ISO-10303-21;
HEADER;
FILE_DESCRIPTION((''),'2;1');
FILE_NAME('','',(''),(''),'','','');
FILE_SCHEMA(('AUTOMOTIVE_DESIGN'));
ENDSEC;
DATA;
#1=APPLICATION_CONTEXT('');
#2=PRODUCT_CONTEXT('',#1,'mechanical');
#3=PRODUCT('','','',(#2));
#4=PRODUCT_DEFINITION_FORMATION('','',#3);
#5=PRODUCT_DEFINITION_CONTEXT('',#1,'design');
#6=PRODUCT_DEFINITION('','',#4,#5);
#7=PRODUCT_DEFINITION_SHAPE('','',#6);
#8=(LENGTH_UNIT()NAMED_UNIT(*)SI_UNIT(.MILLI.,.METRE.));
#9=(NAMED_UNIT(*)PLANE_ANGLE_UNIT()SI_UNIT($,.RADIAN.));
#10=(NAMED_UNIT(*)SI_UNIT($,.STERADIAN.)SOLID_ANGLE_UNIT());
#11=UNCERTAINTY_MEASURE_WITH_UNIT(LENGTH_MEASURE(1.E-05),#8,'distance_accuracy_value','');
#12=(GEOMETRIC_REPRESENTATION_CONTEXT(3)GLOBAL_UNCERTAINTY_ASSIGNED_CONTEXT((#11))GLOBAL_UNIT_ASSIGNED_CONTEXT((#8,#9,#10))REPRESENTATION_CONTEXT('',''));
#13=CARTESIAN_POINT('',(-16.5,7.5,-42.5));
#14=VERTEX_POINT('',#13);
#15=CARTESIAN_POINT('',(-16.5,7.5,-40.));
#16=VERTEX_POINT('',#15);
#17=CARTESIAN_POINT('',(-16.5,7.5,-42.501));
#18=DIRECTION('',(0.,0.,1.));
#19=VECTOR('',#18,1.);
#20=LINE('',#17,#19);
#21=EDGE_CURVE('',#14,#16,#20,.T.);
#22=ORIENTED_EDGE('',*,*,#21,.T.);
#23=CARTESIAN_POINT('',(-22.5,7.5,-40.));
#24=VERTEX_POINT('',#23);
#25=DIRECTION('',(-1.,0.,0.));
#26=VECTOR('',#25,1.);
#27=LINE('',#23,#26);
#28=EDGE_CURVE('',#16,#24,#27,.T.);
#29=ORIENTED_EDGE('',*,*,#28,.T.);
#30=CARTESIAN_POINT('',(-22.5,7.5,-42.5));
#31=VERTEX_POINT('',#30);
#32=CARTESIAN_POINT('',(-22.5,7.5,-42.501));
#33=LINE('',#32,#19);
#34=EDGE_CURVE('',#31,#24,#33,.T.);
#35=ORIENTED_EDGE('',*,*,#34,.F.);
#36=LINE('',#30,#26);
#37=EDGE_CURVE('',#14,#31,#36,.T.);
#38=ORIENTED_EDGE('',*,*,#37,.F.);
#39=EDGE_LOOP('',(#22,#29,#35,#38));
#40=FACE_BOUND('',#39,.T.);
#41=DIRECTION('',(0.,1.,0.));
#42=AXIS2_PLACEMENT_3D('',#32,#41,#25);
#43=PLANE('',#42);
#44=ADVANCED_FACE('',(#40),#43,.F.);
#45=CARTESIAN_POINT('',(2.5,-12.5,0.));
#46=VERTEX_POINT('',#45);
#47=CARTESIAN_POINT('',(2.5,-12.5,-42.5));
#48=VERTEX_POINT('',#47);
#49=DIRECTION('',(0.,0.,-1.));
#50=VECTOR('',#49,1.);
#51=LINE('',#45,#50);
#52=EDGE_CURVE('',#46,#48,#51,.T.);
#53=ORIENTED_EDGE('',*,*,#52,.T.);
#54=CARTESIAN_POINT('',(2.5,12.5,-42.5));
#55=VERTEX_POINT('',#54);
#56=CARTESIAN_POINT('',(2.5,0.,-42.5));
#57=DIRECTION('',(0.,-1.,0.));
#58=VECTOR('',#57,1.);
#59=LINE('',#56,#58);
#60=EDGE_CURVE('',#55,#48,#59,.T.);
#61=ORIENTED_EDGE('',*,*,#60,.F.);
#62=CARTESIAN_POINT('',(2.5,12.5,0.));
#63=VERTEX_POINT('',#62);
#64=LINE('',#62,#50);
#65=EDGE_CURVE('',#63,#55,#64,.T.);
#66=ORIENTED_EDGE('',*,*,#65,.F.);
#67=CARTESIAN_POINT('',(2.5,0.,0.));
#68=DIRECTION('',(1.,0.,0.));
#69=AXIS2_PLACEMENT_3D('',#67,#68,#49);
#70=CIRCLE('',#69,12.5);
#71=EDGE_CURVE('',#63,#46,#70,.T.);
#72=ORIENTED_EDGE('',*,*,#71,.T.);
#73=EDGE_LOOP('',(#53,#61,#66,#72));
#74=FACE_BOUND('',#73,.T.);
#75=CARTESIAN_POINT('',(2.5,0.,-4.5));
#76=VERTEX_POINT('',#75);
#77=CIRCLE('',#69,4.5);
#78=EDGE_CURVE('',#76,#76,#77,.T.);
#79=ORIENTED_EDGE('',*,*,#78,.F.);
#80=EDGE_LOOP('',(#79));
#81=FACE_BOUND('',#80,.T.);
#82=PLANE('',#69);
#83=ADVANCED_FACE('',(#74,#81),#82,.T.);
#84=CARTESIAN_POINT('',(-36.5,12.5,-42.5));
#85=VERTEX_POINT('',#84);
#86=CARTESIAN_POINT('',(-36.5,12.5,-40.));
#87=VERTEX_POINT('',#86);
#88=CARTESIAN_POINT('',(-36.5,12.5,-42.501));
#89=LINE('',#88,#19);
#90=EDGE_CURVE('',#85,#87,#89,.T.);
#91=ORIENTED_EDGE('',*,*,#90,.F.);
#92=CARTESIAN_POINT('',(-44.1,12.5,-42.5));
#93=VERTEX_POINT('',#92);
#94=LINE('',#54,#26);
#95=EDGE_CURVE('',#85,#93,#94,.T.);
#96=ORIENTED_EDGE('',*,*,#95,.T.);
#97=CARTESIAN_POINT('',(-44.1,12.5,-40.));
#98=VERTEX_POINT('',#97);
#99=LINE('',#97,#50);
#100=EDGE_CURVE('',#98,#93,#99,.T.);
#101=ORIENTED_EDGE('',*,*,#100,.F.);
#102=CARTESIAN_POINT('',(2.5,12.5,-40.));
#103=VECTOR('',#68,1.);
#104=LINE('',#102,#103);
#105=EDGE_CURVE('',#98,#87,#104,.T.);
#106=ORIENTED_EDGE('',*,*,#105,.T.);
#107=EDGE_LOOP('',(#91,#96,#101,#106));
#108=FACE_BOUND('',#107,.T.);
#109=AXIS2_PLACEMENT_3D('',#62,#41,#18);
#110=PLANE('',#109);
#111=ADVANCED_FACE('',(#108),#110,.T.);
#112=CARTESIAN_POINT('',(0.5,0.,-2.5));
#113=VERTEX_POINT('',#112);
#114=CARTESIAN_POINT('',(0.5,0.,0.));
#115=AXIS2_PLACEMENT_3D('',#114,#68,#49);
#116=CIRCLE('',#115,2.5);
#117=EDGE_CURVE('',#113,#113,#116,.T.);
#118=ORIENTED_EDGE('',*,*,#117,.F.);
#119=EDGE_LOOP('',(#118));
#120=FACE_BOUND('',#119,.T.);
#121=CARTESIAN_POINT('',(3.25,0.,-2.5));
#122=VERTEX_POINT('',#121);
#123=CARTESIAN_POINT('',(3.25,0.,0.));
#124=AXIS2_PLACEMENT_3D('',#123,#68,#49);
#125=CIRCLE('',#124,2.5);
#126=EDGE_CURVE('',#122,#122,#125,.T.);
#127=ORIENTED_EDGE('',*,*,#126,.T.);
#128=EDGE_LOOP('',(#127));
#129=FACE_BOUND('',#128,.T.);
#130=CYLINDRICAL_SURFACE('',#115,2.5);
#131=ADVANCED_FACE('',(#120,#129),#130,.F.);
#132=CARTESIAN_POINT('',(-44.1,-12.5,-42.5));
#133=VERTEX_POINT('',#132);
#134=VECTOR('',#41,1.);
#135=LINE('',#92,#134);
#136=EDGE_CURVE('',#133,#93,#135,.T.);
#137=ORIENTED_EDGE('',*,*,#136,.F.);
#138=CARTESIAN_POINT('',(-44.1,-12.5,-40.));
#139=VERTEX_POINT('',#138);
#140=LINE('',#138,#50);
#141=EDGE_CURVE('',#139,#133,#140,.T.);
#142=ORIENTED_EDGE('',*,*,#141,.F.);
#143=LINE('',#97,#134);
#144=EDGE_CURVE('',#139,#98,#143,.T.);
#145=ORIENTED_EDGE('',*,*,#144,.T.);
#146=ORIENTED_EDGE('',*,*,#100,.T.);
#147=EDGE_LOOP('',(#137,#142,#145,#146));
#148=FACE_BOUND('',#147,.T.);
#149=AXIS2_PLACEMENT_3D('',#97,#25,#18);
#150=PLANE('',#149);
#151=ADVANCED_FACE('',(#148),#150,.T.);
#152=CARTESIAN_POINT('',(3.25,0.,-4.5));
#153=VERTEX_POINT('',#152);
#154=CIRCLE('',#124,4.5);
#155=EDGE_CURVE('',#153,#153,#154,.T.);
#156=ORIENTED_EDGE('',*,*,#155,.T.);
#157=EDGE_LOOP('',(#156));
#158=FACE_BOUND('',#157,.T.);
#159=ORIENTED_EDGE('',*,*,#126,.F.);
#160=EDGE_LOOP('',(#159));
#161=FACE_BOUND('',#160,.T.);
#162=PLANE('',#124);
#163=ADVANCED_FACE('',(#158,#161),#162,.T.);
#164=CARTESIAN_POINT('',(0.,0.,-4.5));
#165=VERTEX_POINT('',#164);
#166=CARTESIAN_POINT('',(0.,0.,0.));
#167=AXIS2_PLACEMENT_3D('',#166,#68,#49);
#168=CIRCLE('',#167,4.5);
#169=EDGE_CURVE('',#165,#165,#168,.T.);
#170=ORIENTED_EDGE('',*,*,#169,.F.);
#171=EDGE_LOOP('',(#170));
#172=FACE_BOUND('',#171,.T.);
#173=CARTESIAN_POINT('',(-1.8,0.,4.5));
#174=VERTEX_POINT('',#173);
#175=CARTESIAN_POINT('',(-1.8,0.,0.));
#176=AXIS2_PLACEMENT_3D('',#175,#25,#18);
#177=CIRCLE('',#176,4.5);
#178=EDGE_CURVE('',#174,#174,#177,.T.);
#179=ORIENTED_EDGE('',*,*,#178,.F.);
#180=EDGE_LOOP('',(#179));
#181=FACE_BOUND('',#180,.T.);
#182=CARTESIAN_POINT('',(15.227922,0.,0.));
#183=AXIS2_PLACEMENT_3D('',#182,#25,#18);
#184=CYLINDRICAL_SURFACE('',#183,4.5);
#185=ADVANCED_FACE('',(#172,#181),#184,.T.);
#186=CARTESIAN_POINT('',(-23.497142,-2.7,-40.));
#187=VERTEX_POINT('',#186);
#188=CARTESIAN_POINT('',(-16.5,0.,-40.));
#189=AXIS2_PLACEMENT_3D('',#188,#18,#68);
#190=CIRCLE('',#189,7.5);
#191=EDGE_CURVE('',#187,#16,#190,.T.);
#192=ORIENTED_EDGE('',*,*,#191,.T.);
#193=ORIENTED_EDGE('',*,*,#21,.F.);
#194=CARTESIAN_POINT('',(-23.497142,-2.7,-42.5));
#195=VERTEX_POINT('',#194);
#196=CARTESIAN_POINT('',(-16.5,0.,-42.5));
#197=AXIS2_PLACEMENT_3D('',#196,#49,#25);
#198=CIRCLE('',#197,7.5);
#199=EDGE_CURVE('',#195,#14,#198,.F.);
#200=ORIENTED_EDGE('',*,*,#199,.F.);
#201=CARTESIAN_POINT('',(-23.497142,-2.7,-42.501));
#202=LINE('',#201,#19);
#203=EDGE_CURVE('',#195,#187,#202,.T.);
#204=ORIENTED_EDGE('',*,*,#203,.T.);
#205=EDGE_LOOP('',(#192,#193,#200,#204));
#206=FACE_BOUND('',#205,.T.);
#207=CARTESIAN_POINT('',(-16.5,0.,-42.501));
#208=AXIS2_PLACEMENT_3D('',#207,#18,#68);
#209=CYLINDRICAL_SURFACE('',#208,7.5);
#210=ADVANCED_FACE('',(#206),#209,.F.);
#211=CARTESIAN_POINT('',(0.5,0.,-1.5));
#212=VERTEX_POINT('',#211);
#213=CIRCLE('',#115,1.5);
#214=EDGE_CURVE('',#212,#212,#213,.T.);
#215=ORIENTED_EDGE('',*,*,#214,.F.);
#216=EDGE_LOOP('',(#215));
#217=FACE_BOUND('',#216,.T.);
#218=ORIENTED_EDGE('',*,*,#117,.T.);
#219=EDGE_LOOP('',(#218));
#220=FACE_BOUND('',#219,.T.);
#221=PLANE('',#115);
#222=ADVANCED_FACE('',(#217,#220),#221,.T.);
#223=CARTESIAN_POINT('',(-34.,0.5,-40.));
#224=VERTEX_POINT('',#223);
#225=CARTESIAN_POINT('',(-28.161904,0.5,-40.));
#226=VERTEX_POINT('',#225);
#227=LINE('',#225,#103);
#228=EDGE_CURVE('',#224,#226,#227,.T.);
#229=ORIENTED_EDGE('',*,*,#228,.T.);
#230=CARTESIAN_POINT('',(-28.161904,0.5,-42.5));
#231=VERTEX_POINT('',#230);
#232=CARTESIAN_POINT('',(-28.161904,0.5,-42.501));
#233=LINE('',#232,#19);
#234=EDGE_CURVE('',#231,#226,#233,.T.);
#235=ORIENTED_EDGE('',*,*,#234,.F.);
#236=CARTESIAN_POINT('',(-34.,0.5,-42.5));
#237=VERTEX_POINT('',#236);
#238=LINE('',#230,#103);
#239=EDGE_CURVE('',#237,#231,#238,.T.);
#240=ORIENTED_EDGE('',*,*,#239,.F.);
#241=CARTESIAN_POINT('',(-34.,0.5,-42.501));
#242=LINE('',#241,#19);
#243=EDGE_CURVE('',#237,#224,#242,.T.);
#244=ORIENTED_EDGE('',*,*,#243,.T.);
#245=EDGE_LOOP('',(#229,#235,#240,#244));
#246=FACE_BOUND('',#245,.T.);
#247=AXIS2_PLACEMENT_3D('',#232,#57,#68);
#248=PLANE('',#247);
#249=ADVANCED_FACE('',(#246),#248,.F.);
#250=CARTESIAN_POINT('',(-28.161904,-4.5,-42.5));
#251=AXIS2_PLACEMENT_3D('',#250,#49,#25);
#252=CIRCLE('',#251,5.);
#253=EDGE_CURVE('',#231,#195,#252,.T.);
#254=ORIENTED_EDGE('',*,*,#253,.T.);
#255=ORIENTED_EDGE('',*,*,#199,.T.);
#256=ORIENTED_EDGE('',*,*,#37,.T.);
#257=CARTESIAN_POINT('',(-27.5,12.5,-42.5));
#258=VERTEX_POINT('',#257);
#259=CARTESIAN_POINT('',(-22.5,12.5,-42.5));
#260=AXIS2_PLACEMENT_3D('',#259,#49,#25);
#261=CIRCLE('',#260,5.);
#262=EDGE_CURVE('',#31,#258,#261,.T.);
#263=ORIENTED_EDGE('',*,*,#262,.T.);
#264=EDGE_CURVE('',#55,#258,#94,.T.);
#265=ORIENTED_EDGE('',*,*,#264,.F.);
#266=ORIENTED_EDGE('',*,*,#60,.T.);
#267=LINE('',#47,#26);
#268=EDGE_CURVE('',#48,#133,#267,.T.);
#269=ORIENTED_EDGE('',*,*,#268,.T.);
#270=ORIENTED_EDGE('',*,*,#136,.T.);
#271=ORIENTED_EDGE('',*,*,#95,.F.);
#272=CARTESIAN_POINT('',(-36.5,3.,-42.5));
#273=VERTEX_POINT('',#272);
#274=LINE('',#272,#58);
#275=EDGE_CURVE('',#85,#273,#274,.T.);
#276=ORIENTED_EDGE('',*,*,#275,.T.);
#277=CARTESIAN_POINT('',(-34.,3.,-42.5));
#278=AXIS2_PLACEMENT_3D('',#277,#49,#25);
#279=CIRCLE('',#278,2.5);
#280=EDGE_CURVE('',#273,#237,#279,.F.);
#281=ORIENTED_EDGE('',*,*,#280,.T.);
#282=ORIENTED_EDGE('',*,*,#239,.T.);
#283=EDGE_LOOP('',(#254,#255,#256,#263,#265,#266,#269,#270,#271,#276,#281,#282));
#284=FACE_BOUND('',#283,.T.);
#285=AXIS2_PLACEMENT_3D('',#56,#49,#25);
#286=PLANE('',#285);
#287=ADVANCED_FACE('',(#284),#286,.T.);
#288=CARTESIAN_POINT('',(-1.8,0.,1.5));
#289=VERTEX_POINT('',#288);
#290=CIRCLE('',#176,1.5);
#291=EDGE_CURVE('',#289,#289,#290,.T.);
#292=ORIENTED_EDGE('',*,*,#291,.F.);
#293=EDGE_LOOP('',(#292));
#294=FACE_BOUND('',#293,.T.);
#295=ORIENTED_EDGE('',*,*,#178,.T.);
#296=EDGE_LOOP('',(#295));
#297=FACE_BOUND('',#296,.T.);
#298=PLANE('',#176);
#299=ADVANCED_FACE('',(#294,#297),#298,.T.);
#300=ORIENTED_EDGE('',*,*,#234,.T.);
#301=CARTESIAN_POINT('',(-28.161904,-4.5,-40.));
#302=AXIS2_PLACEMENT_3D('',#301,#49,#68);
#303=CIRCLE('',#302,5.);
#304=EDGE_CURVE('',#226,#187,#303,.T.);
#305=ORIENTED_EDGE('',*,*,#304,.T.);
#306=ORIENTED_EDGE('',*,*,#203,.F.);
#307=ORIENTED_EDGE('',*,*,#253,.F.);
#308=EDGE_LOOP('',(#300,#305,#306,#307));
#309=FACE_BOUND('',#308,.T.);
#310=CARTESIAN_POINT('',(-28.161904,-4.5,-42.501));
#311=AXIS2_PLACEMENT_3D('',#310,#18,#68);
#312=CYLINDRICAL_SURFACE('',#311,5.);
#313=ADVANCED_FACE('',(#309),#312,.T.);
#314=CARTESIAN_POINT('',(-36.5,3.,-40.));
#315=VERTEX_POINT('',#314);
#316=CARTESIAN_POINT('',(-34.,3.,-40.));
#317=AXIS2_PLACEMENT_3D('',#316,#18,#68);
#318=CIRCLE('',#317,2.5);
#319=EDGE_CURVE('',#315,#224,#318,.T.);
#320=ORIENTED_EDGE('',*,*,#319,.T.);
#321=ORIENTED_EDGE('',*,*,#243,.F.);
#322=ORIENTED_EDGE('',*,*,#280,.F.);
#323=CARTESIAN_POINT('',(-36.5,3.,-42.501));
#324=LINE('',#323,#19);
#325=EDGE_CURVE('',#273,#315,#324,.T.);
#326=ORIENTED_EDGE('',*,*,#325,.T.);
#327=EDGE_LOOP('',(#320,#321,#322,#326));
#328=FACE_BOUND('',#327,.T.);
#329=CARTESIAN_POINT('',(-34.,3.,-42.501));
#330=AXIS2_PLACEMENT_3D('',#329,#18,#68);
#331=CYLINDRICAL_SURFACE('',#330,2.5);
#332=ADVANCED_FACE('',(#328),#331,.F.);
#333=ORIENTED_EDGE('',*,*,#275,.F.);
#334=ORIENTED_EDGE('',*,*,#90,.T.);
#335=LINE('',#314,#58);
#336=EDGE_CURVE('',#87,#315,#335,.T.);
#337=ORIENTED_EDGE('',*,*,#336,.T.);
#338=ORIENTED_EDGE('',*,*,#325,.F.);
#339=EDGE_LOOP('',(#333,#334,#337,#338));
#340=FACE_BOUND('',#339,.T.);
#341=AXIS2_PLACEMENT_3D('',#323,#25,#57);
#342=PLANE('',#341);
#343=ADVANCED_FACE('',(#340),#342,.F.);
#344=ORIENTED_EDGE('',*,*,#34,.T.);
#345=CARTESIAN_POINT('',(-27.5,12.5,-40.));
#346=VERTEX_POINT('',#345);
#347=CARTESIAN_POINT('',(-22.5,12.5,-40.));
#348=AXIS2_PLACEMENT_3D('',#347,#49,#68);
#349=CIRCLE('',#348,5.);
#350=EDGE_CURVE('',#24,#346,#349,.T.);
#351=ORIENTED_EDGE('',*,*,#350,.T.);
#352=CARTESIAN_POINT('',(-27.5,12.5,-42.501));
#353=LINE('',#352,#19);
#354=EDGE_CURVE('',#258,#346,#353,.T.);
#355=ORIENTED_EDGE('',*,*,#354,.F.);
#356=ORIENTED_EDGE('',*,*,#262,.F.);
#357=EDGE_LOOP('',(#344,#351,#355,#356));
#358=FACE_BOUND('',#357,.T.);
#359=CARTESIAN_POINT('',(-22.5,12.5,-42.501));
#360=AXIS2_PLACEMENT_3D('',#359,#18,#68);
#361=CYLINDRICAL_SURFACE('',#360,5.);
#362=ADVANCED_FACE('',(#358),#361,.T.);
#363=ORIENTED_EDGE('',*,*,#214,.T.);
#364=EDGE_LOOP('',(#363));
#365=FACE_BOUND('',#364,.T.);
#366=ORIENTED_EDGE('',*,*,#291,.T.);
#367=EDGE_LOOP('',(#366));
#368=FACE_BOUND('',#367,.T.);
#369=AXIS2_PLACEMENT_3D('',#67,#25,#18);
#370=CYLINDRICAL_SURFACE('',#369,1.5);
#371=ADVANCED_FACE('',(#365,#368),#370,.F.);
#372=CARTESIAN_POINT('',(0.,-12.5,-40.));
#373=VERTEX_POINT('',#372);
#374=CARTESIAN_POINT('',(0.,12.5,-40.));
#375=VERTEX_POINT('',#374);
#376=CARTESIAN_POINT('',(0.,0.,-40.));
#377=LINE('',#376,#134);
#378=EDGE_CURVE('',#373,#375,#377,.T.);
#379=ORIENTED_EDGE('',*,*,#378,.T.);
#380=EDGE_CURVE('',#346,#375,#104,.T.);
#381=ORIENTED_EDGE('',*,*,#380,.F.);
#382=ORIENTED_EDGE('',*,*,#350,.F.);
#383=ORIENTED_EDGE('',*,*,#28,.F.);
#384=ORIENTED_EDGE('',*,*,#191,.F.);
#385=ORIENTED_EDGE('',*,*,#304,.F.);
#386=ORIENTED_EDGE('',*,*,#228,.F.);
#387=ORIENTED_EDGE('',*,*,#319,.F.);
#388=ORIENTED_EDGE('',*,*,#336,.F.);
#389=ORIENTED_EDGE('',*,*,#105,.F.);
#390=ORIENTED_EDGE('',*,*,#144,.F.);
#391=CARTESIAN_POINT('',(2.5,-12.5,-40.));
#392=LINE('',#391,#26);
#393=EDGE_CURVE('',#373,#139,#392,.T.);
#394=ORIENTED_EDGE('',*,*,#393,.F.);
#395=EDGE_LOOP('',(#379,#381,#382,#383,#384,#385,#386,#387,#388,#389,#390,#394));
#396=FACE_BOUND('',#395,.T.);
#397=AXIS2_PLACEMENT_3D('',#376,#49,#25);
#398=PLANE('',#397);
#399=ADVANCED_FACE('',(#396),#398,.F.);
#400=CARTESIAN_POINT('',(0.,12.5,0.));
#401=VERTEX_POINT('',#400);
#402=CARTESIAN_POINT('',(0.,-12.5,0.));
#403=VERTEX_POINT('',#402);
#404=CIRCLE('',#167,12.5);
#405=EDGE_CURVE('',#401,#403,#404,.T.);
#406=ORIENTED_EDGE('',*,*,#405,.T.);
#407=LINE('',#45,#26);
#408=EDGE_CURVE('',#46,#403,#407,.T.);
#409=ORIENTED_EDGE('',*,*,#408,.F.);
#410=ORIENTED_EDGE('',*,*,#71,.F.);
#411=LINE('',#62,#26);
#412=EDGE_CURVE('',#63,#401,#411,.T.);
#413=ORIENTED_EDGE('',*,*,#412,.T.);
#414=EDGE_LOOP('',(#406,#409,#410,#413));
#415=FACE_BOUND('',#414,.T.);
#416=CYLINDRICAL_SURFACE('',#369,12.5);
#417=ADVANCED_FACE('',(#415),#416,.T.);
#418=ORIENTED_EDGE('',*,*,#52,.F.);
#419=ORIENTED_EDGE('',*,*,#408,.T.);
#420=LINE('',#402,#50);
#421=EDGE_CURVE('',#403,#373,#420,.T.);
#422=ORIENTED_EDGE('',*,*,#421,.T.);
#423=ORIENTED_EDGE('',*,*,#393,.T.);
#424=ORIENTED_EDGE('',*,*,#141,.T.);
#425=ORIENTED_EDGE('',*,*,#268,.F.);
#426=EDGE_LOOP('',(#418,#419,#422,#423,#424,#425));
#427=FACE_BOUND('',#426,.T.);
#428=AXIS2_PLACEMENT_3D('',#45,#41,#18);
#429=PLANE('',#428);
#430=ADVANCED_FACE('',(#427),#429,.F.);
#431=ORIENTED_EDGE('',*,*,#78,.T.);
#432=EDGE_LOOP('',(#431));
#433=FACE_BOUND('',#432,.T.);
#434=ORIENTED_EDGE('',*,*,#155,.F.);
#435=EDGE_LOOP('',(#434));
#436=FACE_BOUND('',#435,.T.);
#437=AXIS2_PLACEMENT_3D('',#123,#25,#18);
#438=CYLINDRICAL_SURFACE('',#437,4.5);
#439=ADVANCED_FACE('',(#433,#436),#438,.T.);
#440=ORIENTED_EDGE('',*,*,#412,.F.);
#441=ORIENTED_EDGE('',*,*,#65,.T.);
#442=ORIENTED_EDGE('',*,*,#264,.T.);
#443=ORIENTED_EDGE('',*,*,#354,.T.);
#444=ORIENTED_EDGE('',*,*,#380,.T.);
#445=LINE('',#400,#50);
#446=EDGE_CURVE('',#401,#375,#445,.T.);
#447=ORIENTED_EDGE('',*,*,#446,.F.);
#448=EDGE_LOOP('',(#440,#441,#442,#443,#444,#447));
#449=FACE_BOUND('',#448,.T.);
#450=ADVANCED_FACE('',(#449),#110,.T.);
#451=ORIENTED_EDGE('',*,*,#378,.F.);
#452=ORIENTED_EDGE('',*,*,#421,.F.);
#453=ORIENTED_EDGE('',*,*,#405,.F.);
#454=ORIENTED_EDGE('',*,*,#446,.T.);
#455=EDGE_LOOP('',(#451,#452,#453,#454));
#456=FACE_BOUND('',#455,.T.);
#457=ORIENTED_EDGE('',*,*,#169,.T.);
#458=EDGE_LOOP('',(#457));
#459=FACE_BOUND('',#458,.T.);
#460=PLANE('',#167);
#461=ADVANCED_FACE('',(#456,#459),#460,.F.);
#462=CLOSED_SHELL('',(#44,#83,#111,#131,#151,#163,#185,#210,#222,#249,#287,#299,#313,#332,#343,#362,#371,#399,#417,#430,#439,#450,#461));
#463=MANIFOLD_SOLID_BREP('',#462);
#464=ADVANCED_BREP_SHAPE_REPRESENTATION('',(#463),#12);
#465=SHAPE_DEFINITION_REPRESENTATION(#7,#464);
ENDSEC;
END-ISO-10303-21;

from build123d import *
from build123d.topology import SkipClean

# Parameters (mm, degrees)
SKETCH1_R                = 1.5
BOSS_EXTRUDE1_DEPTH      = 2.5
BOSS_EXTRUDE2_DEPTH      = 1.8
BOSS_EXTRUDE2_DEPTH_BACK = 2.5
SKETCH2_R                = 4.5
SKETCH2_R_2              = 1.5
SKETCH4_R                = 2.5
CUT_EXTRUDE1_DEPTH       = 2
BOSS_EXTRUDE3_START      = 0.75
SKETCH5_R                = 4.5
SKETCH5_R_2              = 2.5
BOSS_EXTRUDE3_DEPTH      = 0.75
SKETCH6_W                = 46.6
SKETCH6_H                = 25
BOSS_EXTRUDE4_DEPTH      = 2.5
CUT_EXTRUDE2_REACH       = 71.694


with BuildPart() as part:
    # Sketch1 → Boss-Extrude1 (new body)
    with BuildSketch(Plane(origin=(0, 0, 0), x_dir=(0, 0, -1), z_dir=(1, 0, 0))):
        with BuildLine():
            Line((0, 12.5), (42.5, 12.5))
            Line((42.5, 12.5), (42.5, -12.5))
            Line((42.5, -12.5), (0, -12.5))
            ThreePointArc((0, -12.5), (-12.5, 0), (0, 12.5))
        make_face()
        Circle(SKETCH1_R, mode=Mode.SUBTRACT)
    extrude(amount=BOSS_EXTRUDE1_DEPTH)

    # Sketch2 → Boss-Extrude2 (add, two sides: drawn at the far end of the back side and taken through both)
    with BuildSketch(Plane.ZY.offset(-BOSS_EXTRUDE2_DEPTH_BACK)):
        Circle(SKETCH2_R)
        Circle(SKETCH2_R_2, mode=Mode.SUBTRACT)
    extrude(amount=BOSS_EXTRUDE2_DEPTH + BOSS_EXTRUDE2_DEPTH_BACK)

    # Sketch4 → Cut-Extrude1 (cut)
    with BuildSketch(Plane(origin=(2.5, 0, 0), x_dir=(0, 0, -1), z_dir=(1, 0, 0))):
        Circle(SKETCH4_R)
    extrude(amount=-CUT_EXTRUDE1_DEPTH, mode=Mode.SUBTRACT)

    # Sketch5 → Boss-Extrude3 (add)
    with SkipClean():  # the faces are left unmerged after this step: merging them gives an invalid solid
        with BuildSketch(Plane(origin=(2.5, 0, 0), x_dir=(0, 0, -1), z_dir=(1, 0, 0)).offset(BOSS_EXTRUDE3_START)):
            with Locations(Location((0, 0, 0), (0, 0, 180))):
                Circle(SKETCH5_R)
            Circle(SKETCH5_R_2, mode=Mode.SUBTRACT)
        extrude(amount=-BOSS_EXTRUDE3_DEPTH)

    # Sketch6 → Boss-Extrude4 (add)
    with SkipClean():  # the faces are left unmerged after this step: merging them gives an invalid solid
        with BuildSketch(Plane(origin=(0, 0, -42.5), x_dir=(-1, 0, 0), z_dir=(0, 0, -1))):
            with Locations((20.8, 0)):
                Rectangle(SKETCH6_W, SKETCH6_H)
        extrude(amount=-BOSS_EXTRUDE4_DEPTH)
    add(part.part.scale(1), mode=Mode.REPLACE)  # the faces are merged on a copy

    # Sketch7 → Cut-Extrude2 (cut, up to next)
    with BuildSketch(Plane.XY.offset(-40), mode=Mode.PRIVATE) as cut_extrude2_sk1:
        with BuildLine():
            Line((-27.5, 12.5), (-36.5, 12.5))
            Line((-36.5, 12.5), (-36.5, 3))
            ThreePointArc((-36.5, 3), (-35.767766953, 1.232233047), (-34, 0.5))
            Line((-34, 0.5), (-28.16190379, 0.5))
            ThreePointArc((-28.16190379, 0.5), (-25.333476665, -0.376894374), (-23.497142274, -2.7))
            ThreePointArc((-23.497142274, -2.7), (-10.315341562, -4.242640687), (-16.5, 7.5))
            Line((-16.5, 7.5), (-22.5, 7.5))
            ThreePointArc((-22.5, 7.5), (-26.035533906, 8.964466094), (-27.5, 12.5))
        make_face()
    cut_extrude2_tool1 = extrude(cut_extrude2_sk1.sketch, amount=-CUT_EXTRUDE2_REACH, mode=Mode.PRIVATE) & part.part
    add(cut_extrude2_tool1.solids().sort_by_distance((-22.661838, 2.786009, -40))[0], mode=Mode.SUBTRACT)


solid = part.part
